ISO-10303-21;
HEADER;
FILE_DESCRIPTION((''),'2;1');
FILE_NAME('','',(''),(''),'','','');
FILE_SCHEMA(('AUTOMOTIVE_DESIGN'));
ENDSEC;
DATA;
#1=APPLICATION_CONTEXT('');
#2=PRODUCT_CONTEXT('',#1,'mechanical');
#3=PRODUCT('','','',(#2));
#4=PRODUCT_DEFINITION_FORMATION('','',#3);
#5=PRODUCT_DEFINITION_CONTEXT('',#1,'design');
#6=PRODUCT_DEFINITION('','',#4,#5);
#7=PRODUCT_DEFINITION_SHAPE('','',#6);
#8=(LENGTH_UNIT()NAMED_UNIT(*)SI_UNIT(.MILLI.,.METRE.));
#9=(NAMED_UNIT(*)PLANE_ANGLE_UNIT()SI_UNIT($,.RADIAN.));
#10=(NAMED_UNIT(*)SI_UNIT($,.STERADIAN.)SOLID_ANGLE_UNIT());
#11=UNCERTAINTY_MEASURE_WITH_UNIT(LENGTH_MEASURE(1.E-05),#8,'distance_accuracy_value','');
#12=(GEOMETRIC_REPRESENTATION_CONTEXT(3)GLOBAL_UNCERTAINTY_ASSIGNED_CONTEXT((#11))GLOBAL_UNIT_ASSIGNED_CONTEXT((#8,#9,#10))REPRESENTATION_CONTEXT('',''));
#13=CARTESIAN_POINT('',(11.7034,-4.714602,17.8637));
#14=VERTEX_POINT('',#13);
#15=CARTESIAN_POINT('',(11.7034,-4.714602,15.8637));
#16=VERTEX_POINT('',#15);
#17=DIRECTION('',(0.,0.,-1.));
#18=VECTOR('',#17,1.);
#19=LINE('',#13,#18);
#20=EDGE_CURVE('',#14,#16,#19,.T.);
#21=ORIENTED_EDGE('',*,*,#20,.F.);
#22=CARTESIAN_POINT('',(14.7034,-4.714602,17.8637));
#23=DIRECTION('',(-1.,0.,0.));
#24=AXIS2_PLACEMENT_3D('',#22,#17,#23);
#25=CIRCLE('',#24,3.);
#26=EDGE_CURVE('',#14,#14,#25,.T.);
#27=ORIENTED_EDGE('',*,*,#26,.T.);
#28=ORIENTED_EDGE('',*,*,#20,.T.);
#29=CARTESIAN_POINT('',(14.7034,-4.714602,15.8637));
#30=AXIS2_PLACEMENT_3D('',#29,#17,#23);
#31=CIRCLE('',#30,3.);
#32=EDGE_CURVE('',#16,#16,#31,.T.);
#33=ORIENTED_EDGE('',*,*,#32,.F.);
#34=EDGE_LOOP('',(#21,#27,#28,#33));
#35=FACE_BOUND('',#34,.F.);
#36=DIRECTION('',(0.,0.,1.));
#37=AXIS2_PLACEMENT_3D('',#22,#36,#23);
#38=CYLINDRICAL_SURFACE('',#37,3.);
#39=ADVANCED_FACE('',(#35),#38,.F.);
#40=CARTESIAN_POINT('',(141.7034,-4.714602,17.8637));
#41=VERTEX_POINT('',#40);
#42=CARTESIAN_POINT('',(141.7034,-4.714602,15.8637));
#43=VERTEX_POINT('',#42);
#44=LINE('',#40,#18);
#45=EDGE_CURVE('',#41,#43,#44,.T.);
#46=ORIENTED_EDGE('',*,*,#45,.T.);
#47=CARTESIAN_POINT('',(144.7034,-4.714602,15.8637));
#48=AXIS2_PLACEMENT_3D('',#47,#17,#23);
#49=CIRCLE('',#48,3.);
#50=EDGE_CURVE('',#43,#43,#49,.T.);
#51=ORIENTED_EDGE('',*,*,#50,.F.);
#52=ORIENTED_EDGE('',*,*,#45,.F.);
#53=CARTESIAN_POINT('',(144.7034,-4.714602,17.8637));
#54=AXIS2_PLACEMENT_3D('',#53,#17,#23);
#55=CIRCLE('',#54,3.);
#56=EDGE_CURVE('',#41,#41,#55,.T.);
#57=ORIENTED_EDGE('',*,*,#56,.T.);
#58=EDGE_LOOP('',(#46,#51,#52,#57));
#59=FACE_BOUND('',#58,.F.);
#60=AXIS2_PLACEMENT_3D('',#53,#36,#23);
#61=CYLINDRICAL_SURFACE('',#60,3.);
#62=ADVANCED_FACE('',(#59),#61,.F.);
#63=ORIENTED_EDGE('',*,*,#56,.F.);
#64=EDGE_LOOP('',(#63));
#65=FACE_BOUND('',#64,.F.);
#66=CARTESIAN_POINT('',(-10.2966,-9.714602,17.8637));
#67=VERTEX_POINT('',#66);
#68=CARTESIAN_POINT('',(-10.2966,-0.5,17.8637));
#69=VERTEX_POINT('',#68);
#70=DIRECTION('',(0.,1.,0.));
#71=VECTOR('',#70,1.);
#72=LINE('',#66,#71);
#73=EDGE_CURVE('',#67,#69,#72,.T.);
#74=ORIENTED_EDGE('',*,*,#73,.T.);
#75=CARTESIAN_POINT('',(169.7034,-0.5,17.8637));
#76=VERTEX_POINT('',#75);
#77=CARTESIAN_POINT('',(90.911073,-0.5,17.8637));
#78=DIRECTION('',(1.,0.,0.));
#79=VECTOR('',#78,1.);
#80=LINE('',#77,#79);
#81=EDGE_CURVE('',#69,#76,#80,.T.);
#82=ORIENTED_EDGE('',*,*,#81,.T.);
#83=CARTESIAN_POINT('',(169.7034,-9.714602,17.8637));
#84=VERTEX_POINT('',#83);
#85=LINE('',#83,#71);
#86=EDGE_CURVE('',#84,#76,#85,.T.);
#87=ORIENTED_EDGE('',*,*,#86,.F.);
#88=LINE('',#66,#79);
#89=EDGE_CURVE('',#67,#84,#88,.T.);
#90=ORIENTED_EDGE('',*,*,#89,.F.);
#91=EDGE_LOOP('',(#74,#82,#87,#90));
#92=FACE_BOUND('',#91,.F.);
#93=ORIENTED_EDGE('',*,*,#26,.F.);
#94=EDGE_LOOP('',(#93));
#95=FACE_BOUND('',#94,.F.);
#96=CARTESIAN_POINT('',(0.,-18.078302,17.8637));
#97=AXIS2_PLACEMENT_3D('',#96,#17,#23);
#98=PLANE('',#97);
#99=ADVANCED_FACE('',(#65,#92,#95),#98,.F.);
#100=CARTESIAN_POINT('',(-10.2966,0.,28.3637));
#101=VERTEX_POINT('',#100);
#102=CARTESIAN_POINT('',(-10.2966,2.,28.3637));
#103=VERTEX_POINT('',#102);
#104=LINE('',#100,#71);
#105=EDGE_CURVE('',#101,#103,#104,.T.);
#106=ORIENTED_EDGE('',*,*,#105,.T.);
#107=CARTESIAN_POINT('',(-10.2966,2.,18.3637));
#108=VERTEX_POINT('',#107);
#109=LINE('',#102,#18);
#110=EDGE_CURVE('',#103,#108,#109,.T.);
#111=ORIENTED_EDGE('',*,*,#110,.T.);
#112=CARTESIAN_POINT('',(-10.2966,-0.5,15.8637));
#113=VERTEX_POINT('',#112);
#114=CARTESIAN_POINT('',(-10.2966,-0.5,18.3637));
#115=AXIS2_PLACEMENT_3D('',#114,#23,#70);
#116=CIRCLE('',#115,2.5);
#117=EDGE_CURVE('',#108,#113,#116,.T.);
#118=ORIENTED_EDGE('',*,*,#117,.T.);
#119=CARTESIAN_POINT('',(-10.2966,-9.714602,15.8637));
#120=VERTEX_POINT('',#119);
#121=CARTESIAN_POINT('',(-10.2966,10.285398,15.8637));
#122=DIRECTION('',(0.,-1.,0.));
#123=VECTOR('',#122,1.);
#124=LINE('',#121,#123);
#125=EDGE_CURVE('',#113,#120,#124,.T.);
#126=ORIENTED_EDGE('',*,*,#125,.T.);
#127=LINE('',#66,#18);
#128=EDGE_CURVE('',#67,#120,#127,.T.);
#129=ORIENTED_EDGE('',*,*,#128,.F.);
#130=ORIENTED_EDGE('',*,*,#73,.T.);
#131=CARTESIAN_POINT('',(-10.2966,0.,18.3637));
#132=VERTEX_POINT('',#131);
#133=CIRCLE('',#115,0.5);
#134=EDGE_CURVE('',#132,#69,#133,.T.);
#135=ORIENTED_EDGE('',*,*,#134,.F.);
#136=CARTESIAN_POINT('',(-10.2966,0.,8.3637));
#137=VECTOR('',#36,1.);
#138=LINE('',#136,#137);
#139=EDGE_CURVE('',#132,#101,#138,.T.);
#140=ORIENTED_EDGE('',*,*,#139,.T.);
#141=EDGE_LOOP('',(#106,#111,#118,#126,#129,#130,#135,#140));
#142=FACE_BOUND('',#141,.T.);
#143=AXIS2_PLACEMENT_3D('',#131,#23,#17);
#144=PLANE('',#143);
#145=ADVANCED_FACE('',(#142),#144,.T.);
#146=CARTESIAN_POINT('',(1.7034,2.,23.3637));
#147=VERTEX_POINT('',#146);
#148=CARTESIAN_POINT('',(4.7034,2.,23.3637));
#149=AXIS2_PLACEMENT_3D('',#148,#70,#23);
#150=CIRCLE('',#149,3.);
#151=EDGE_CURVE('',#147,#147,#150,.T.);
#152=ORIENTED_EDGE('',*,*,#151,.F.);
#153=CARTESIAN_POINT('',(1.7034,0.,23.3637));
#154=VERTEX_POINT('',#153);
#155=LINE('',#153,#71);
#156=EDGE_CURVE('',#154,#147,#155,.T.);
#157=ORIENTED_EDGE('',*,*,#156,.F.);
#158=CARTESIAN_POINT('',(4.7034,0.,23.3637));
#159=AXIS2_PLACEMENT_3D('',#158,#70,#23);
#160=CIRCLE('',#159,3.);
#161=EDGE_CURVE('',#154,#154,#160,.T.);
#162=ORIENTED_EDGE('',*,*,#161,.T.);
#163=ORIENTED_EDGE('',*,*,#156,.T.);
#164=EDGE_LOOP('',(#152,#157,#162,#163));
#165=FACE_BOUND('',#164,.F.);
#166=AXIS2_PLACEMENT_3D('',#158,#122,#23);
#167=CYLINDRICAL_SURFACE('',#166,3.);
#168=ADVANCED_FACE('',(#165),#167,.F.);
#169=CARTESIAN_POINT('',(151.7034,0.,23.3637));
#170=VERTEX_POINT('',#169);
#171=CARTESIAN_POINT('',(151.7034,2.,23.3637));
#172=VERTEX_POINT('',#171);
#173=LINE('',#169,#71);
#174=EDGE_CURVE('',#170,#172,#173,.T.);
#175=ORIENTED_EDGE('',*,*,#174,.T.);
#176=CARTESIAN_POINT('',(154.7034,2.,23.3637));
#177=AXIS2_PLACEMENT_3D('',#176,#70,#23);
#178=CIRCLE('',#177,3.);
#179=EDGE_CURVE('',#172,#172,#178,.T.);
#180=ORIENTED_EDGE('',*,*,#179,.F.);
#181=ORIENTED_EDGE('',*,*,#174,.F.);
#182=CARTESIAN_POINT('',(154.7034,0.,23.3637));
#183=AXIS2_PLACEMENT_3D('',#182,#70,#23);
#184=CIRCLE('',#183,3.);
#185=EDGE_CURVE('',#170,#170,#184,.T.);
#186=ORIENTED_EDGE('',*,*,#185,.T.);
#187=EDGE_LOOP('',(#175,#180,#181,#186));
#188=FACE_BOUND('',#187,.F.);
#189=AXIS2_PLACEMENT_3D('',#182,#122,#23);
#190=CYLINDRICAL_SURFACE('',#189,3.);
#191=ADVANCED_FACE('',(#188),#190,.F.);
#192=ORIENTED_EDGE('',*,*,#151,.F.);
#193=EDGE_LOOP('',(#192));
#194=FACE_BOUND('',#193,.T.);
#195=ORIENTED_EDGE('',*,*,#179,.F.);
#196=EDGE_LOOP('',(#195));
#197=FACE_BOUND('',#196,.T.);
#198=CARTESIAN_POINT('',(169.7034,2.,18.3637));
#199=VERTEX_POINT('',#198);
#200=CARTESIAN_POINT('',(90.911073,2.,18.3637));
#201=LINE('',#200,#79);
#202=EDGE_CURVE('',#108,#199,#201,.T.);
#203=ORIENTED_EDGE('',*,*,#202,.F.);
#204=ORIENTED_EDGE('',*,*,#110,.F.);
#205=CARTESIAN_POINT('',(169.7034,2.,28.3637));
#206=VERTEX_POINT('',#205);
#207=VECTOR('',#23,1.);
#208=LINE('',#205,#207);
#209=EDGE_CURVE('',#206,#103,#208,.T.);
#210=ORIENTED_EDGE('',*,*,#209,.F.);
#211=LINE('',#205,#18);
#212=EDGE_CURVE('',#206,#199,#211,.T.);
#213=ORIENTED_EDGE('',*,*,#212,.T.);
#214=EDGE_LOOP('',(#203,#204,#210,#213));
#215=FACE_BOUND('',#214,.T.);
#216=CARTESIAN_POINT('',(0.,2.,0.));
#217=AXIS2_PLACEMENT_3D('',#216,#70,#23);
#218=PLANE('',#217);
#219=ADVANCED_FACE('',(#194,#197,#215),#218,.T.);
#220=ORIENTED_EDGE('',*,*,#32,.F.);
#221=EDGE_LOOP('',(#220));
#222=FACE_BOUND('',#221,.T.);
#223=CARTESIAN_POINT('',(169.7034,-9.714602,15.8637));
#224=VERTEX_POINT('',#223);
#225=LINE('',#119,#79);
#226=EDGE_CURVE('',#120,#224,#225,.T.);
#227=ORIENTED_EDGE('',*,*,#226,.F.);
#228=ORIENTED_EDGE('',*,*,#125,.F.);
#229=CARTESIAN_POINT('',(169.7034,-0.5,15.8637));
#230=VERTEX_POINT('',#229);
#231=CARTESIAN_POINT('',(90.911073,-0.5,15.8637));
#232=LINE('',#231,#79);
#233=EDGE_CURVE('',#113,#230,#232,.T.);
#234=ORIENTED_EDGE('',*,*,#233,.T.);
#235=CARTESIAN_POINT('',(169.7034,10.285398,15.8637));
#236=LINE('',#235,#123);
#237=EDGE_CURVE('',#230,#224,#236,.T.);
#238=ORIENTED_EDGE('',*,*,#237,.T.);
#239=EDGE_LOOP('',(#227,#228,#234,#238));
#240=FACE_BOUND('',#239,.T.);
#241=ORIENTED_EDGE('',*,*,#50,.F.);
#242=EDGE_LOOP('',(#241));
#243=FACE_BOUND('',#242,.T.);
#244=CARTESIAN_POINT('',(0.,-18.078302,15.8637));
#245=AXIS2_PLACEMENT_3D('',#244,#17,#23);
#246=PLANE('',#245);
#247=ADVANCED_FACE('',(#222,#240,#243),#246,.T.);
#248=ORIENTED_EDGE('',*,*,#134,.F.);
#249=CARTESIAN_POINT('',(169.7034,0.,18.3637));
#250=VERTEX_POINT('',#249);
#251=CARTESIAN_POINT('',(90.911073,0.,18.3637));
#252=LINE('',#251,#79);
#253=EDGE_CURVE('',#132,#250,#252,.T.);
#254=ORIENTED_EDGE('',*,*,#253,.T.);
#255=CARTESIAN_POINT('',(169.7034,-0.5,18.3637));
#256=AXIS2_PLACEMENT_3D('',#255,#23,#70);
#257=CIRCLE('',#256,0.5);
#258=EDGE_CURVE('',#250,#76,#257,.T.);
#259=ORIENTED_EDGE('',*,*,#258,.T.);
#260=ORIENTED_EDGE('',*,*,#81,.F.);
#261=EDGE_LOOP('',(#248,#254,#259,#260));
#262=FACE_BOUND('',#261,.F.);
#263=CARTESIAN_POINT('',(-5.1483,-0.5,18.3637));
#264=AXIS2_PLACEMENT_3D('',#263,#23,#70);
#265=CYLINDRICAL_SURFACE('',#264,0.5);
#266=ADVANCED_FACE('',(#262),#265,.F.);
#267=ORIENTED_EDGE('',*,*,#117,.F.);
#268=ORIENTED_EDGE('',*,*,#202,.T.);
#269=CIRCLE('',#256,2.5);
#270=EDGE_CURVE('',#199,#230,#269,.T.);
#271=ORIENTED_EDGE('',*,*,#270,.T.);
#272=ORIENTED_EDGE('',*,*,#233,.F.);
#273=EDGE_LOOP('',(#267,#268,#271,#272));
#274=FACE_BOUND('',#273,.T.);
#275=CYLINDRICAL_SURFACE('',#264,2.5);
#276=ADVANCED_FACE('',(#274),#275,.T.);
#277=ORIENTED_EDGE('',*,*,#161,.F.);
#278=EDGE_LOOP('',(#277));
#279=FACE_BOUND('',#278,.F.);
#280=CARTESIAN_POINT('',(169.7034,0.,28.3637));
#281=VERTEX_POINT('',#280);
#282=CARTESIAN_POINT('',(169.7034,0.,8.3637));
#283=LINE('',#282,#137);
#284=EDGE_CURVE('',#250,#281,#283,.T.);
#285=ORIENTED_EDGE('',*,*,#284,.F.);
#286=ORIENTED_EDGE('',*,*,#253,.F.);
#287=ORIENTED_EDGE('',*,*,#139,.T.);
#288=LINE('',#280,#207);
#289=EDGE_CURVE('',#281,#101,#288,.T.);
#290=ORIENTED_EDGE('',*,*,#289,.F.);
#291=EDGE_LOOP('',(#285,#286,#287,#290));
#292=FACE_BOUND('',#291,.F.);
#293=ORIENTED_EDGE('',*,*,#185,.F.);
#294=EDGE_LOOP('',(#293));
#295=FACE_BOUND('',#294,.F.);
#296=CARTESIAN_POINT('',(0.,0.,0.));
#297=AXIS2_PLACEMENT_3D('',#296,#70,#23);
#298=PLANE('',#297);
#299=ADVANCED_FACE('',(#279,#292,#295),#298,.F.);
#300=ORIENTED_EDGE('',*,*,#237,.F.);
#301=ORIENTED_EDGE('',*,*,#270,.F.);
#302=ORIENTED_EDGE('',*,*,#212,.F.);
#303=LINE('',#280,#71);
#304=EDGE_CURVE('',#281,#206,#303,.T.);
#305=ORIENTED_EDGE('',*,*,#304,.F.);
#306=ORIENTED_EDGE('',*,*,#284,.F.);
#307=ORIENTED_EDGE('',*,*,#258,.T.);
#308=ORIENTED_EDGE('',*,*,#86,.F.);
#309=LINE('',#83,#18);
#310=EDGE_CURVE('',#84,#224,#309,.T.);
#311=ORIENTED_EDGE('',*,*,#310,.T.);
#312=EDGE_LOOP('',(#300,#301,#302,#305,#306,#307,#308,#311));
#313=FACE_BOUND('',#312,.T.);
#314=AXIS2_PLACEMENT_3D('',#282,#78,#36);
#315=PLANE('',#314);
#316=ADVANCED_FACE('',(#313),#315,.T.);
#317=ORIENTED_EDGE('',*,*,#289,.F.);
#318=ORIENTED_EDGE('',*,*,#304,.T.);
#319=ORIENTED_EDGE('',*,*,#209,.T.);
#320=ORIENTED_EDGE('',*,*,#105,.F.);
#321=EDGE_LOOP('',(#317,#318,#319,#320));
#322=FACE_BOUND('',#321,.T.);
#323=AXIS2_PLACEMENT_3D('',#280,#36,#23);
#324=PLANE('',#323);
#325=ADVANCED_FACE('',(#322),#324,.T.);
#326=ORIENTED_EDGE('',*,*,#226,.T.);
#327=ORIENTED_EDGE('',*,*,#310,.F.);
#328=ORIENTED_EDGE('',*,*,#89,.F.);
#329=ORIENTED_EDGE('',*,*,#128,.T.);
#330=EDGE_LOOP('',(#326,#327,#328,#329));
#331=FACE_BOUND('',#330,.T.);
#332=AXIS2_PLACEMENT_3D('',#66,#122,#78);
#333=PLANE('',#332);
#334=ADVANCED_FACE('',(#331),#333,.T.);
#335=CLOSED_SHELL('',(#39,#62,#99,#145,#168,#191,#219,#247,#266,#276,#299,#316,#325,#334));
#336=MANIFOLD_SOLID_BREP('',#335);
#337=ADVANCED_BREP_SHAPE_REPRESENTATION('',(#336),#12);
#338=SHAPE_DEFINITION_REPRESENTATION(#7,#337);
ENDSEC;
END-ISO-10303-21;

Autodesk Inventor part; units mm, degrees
ref_plane "YZ Plane" through (0, 0, 0) normal (1, 0, 0) x (0, 1, 0)
ref_plane "XZ Plane" through (0, 0, 0) normal (0, 1, 0) x (-1, 0, 0)
ref_plane "XY Plane" through (0, 0, 0) normal (0, 0, 1) x (1, 0, 0)
sketch "Boceto5" plane through (0, 0, 0) normal (0, 1, 0) x (-1, 0, 0)
  line L0 (10.2966, 28.3637) -> (10.2966, 8.3637)
  line L1 (10.2966, 8.3637) -> (-169.7034, 8.3637)
  line L2 (-169.7034, 8.3637) -> (-169.7034, 28.3637)
  line L3 (-169.7034, 28.3637) -> (10.2966, 28.3637)
  line L4 (10.2966, 18.3637) -> (-169.7034, 18.3637)
  circle A0 centre (-154.7034, 23.3637) radius 3
  circle A1 centre (-4.7034, 23.3637) radius 3
  circle A2 centre (-14.7034, 13.3637) radius 3
  circle A3 centre (-144.7034, 13.3637) radius 3
  point P0 (0, 0)
  dimension "d33" = 20
  dimension "d34" = 180
  dimension "d35" = 20
  dimension "d36" = 6
  dimension "d37" = 6
  dimension "d38" = 6
  dimension "d39" = 6
  dimension "d40" = 150
  dimension "d41" = 130
  dimension "d42" = 15
  dimension "d43" = 25
  dimension "d44" = 5
  dimension "d45" = 5
  dimension "d46" = 5
  dimension "d47" = 5
extrude "Extrusión4" add sketch "Boceto5" along normal blind 2 contours L0 L1 L2 L4
extrude "Extrusión5" add sketch "Boceto5" along normal blind 2 contours L0 L4 L2 L3
bend part "Pieza de plegado1" radius 0.5 angle 90 line through (-10.2966, 0, 18.3637) along (1, 0, 0) centre toward (0, -1, 0) moving side (0, 0, -1) both sides no
equation "\"Radio_pliegue\" = Grosor"
equation "\"Anchura_desahogo_plegado\" = Grosor"
equation "\"Profundidad_desahogo_plegado\" = 0.5 * Grosor"
equation "\"Tamaño_destalonado\" = 4 * Grosor"
equation "\"Remanente_mínimo\" = 2 * Grosor"
equation "\"Radiodetransición\" = Radio_pliegue"
equation "\"Tamaño_de_radio_de_Jacobi\" = Grosor"
equation "\"TamañoSeparación\" = Grosor"
equation "\"Grosor\" = 0.5"
properties part number "Soporte L" material "Aluminum 1100-H14"
